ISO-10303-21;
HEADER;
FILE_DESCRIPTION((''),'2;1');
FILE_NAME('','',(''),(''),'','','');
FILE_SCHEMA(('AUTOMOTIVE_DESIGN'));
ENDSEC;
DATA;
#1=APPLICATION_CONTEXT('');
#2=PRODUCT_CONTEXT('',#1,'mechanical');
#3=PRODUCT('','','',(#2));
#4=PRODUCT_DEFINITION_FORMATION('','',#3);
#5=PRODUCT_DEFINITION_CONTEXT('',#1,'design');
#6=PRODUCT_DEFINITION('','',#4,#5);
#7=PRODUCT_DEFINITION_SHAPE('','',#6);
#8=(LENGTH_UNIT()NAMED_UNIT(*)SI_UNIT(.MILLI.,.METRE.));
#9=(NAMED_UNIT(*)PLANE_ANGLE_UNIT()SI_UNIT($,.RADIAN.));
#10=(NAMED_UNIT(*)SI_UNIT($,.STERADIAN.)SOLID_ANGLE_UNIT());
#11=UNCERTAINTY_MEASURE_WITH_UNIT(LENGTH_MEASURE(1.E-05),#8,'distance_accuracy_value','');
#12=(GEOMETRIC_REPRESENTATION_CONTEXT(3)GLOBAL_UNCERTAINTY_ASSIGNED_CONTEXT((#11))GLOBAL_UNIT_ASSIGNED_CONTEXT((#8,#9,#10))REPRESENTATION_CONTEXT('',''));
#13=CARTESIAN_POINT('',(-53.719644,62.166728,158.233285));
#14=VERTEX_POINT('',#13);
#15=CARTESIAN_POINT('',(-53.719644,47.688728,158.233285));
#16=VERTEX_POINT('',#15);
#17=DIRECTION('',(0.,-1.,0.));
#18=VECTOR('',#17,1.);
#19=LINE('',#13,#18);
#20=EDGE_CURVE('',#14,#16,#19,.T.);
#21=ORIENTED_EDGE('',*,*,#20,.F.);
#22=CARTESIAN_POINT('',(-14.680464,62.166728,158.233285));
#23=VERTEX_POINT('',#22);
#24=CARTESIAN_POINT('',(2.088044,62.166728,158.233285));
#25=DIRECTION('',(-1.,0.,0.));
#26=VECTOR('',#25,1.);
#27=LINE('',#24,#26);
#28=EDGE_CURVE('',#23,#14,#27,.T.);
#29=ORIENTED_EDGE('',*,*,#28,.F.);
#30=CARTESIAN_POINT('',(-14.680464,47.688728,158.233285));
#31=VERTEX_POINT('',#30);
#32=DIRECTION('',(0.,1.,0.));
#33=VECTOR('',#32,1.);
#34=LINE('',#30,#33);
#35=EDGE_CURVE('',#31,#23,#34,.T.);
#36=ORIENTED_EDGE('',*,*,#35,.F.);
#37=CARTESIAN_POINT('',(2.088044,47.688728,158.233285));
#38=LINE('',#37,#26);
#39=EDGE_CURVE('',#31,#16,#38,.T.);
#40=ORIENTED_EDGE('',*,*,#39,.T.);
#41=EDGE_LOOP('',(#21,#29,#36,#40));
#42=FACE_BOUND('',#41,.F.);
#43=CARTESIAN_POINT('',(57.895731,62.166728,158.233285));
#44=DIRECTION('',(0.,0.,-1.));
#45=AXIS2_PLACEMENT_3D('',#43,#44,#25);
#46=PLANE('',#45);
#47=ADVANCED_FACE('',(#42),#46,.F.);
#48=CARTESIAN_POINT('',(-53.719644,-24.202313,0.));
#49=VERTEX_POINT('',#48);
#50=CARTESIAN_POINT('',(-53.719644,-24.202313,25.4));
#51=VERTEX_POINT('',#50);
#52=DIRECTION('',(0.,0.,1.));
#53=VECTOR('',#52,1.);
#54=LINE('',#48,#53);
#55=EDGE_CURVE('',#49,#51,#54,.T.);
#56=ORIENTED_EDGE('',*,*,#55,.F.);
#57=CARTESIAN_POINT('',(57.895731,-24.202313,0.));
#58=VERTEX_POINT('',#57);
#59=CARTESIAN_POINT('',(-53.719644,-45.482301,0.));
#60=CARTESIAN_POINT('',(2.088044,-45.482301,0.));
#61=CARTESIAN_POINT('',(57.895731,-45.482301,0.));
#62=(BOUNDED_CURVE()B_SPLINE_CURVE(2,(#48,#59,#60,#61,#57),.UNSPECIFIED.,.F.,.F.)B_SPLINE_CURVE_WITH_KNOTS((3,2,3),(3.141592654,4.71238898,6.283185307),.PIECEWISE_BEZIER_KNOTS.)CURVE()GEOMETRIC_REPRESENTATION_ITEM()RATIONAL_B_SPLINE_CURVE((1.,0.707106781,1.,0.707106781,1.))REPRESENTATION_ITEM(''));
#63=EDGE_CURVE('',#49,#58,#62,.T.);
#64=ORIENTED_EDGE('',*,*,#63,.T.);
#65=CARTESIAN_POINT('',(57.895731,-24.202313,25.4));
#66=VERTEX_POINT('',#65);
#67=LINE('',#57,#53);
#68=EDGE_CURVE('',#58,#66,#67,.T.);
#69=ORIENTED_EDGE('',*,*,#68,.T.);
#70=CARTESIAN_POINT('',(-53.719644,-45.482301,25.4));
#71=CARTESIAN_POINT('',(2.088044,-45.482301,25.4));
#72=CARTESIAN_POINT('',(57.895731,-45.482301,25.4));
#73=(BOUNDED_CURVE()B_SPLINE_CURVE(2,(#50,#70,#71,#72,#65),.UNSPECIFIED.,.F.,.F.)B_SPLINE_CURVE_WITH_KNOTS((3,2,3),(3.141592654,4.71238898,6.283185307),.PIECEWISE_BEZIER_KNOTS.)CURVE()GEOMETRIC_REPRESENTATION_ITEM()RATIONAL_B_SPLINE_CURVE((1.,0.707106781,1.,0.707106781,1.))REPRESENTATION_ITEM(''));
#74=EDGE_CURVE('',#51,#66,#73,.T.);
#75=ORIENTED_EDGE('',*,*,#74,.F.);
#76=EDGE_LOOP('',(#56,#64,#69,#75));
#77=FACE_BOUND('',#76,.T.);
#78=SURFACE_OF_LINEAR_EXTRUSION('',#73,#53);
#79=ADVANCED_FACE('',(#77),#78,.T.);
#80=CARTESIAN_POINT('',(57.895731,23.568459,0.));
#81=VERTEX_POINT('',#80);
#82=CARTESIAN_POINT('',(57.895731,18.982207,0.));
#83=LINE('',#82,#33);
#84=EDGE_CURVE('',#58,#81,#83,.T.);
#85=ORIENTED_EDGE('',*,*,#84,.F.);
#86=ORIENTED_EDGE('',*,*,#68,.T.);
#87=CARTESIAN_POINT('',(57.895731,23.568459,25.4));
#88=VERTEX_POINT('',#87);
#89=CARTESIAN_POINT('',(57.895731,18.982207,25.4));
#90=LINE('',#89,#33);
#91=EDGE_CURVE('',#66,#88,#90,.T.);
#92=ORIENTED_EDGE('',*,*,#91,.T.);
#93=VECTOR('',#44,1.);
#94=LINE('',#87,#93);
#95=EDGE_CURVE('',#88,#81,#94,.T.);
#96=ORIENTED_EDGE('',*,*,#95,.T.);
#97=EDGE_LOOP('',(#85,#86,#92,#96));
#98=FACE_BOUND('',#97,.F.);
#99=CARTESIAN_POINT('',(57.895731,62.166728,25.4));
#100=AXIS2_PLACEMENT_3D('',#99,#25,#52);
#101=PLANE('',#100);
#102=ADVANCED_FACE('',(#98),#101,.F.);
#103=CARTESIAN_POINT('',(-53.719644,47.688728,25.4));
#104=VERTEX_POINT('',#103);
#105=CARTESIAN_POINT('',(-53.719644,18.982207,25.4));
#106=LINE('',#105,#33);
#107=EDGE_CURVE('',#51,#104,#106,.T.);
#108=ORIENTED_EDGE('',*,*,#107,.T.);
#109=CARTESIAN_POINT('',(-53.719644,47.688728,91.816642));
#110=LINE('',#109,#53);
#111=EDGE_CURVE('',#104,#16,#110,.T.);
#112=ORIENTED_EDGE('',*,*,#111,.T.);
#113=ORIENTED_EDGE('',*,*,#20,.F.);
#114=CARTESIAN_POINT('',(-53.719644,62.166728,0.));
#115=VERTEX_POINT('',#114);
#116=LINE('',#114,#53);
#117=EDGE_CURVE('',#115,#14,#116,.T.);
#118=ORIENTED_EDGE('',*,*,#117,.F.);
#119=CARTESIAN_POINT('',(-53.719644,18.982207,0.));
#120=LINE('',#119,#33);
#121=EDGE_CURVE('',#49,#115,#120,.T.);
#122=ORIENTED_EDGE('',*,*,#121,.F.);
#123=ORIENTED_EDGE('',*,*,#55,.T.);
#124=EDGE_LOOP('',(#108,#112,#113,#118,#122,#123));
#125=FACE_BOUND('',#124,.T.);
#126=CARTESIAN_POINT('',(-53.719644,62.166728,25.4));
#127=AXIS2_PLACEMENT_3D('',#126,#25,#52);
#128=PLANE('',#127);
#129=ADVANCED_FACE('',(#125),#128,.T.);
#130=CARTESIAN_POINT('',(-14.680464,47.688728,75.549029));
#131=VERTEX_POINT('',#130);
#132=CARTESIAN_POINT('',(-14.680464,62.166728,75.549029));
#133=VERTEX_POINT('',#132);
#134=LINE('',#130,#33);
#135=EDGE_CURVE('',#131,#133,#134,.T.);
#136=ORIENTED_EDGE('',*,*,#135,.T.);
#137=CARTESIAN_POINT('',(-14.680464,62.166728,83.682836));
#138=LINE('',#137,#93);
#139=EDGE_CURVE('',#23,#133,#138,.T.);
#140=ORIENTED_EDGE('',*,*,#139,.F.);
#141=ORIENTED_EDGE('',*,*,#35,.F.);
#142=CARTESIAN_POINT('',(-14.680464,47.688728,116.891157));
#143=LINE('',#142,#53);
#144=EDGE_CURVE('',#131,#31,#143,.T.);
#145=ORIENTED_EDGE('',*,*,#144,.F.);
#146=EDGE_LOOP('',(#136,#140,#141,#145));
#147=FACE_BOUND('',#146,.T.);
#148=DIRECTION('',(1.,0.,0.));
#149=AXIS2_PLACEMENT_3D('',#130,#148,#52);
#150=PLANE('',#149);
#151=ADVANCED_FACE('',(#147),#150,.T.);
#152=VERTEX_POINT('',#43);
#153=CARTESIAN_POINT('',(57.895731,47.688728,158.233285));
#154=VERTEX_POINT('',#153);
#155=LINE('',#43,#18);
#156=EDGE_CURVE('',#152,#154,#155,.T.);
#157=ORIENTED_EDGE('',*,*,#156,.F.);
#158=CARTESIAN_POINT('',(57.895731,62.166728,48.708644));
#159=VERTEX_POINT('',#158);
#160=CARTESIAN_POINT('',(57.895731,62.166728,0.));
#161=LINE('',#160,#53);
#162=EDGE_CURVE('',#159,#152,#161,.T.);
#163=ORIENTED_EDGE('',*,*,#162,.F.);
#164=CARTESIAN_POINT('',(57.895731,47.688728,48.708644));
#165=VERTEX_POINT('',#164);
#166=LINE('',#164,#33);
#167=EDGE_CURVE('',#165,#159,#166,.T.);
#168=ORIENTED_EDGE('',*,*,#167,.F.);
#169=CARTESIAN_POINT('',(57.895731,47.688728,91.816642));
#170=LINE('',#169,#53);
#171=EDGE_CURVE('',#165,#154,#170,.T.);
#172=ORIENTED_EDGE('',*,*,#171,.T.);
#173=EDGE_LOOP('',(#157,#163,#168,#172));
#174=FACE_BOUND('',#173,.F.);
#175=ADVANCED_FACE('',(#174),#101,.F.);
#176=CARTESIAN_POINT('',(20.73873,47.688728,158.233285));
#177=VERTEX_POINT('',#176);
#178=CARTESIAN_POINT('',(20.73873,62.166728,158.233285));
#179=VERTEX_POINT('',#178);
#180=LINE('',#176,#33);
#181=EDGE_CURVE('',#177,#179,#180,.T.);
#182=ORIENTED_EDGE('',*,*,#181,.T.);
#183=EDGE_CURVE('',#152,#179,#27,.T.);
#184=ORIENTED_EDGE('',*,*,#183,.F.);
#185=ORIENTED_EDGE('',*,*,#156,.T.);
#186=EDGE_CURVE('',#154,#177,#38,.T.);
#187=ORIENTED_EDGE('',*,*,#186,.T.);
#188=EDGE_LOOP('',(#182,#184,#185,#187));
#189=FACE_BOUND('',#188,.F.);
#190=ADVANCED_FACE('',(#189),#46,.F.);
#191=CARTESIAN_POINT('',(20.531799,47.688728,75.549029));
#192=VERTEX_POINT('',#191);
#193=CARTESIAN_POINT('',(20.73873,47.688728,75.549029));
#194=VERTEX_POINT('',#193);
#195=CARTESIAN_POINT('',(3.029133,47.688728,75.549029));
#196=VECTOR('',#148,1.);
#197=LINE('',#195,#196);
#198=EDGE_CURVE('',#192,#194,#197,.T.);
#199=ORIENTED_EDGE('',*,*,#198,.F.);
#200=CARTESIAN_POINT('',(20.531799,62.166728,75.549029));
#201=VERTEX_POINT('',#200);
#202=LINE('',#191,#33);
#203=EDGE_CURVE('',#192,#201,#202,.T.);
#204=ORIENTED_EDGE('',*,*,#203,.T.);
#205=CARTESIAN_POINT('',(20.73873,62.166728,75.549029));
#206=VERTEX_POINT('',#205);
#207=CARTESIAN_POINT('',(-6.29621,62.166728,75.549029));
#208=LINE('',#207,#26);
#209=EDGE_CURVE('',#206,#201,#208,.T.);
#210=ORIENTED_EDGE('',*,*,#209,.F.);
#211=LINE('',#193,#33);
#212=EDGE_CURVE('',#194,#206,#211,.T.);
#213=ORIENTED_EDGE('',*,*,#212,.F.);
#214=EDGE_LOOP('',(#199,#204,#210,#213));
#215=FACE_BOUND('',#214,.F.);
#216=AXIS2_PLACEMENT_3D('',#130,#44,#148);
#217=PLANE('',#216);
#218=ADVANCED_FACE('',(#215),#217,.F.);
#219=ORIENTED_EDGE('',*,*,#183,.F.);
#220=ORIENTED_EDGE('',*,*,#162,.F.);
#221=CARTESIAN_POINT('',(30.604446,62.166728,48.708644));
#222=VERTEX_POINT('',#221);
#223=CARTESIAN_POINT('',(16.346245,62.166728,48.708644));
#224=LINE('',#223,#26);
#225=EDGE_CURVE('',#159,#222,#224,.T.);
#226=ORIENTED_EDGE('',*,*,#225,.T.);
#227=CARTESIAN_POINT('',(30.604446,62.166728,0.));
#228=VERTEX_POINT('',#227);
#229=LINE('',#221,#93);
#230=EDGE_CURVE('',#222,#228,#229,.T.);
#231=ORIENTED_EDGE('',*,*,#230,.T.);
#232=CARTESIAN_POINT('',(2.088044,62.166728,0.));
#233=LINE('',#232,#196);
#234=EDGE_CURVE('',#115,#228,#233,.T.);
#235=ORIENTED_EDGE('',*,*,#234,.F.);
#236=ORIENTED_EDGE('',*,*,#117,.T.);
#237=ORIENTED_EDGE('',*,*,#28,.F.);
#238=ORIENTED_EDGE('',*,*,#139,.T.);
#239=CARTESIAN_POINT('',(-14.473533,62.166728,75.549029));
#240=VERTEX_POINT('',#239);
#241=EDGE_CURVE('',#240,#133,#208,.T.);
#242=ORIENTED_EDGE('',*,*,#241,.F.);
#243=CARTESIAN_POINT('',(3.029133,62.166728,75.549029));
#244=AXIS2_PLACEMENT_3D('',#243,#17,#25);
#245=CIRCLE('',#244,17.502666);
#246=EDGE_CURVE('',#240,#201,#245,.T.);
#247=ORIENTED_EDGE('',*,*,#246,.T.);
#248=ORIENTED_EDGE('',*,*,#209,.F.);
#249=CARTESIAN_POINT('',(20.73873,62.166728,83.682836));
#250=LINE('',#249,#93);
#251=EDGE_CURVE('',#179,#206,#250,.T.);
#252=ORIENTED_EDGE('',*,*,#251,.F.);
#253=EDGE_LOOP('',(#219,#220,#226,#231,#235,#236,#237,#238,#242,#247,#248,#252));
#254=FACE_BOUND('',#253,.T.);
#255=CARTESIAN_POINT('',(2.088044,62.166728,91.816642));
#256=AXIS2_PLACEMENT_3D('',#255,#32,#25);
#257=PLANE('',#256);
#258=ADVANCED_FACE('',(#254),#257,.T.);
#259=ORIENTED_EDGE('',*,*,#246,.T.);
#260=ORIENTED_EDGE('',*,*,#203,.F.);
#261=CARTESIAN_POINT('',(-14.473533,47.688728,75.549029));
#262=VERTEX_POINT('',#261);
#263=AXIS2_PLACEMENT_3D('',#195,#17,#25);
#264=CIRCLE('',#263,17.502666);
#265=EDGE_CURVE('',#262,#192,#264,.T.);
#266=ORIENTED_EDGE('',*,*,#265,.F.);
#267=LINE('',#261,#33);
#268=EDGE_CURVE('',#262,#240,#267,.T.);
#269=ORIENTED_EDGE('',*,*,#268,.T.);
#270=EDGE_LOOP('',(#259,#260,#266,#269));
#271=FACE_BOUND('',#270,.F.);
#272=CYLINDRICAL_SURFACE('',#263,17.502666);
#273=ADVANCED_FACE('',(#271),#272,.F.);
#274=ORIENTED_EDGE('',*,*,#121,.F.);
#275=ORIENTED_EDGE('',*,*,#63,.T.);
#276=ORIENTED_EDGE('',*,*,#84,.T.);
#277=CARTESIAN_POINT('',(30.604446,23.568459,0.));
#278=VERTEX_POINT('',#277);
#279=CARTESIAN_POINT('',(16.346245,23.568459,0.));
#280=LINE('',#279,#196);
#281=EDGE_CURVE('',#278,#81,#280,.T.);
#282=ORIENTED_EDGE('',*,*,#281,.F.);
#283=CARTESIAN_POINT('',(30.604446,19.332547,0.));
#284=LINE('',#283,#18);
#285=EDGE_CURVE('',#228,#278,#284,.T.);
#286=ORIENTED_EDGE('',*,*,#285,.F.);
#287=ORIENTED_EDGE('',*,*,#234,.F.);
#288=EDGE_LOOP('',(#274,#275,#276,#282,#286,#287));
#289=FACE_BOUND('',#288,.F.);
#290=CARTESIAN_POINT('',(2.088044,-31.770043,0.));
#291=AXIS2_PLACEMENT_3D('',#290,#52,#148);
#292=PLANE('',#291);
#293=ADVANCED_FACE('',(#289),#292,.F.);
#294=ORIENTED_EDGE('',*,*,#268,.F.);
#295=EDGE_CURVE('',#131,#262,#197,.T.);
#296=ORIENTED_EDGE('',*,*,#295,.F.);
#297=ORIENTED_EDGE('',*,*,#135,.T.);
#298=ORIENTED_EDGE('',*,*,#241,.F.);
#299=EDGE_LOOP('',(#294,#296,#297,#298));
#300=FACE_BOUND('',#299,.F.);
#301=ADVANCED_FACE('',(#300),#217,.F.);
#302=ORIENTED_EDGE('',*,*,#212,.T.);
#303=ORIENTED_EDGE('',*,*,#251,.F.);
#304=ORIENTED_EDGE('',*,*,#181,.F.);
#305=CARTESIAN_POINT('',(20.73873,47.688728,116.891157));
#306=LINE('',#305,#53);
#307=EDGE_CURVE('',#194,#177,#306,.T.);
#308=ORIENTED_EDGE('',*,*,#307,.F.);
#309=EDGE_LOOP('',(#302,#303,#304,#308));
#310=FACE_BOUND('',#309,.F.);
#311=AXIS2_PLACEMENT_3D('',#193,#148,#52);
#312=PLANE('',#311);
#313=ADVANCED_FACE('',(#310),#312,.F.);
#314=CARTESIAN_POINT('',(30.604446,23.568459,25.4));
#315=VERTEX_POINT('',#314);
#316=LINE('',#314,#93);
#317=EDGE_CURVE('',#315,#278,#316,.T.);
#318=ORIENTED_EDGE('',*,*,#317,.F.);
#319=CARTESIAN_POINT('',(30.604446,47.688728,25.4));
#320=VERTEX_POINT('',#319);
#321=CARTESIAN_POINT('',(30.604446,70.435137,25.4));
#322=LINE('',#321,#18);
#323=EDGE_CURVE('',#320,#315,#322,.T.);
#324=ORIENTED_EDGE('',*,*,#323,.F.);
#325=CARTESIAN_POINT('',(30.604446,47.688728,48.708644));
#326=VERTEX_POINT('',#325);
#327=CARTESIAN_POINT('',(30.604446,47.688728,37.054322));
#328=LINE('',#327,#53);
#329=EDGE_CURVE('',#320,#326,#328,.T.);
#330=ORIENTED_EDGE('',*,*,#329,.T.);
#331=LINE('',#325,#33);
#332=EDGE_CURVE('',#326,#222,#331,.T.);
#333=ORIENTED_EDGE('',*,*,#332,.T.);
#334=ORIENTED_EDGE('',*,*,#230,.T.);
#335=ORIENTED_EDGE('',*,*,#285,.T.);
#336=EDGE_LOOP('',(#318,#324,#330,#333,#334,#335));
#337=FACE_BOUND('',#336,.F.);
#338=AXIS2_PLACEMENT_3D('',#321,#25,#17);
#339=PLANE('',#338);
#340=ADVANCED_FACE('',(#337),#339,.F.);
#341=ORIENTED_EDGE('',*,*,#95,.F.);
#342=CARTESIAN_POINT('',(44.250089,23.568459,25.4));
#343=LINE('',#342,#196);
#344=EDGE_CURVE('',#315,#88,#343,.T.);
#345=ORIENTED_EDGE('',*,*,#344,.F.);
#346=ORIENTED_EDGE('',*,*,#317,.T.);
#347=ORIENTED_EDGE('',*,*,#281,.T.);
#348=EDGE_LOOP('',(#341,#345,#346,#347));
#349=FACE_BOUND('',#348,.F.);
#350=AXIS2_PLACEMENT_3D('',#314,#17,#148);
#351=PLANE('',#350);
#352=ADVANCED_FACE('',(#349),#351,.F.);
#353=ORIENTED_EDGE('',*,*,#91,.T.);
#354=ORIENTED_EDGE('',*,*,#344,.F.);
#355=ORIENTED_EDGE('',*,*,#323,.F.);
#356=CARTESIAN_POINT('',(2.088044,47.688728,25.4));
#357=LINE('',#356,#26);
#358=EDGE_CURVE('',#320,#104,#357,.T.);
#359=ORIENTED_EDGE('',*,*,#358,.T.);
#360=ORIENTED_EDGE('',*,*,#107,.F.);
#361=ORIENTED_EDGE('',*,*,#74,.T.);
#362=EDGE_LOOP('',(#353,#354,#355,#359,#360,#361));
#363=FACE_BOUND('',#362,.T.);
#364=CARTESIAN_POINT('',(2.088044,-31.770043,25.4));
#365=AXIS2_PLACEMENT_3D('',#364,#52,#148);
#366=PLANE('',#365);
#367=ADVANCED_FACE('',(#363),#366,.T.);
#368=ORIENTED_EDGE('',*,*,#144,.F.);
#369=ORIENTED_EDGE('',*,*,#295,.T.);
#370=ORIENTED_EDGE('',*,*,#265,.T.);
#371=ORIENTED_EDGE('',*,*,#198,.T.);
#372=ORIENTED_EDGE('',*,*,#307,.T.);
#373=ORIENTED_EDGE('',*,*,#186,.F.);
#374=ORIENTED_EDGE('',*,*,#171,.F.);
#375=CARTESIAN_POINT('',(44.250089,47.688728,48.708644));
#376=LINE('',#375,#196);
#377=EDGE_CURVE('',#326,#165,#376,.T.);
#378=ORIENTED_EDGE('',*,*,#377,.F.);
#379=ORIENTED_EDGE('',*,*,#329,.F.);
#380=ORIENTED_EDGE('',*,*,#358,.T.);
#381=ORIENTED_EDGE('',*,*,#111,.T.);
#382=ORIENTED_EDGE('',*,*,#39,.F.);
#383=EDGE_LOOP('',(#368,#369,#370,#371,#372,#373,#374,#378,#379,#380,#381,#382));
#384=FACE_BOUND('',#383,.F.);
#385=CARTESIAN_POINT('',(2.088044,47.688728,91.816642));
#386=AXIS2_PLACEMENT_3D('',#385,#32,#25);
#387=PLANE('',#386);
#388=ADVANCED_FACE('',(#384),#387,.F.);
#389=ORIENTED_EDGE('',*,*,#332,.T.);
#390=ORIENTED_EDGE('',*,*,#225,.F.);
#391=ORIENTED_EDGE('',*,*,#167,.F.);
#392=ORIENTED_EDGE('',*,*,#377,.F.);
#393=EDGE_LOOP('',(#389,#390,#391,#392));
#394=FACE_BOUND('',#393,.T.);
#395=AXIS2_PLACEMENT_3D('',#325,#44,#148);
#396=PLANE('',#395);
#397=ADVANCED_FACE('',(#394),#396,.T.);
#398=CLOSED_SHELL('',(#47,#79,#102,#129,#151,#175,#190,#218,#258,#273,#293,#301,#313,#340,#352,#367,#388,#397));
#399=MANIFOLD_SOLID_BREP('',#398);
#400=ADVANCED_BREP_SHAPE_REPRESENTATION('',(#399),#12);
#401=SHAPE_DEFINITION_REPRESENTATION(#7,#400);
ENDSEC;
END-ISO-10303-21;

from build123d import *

# Parameters (mm, degrees)
F0_W      = 111.6153746843
F0_H      = 86.3690413535
F1_DEPTH  = 25.4
F2_W      = 111.6153746843
F2_H      = 132.8332849503
F3_DEPTH  = 14.478
F5_DEPTH  = 25.4
F6_W      = 27.2912848741
F6_H      = 24.1202692242
F6_H_2    = 22.7464084773
F7_DEPTH  = 56.134
F8_W      = 27.2912848741
F8_H      = 23.3086437643
F9_DEPTH  = 25.4
F10_W     = 35.4191940278
F10_H     = 82.6842561364
F11_DEPTH = 25.4
F13_DEPTH = 25.4


with BuildPart() as f1:
    # F0 (on Top) → F1 (new body)
    with BuildSketch(Plane.XY):
        with Locations((2.0880438387, 18.9822074026)):
            Rectangle(F0_W, F0_H)
    extrude(amount=F1_DEPTH)

    # F2 (on face) → F3 (join)
    with BuildSketch(Plane(origin=(0, 62.1667280793, 0), x_dir=(-1, 0, 0), z_dir=(0, 1, 0))):
        with Locations((-2.0880438387, 91.8166424751)):
            Rectangle(F2_W, F2_H)
    extrude(amount=-F3_DEPTH)

    # F4 (on face) → F5 (join)
    with BuildSketch(Plane.XY.offset(25.4)):
        with BuildLine():
            add(Edge.make_bspline(
                [(-53.7196435034, -24.2023132741), (-53.7196435034, -45.4823012569), (2.0880438387, -45.4823012569), (57.8957311809, -45.4823012569), (57.8957311809, -24.2023132741)],
                knots=[3.1415926536, 3.1415926536, 3.1415926536, 4.7123889804, 4.7123889804, 6.2831853072, 6.2831853072, 6.2831853072], degree=2, weights=[1, 0.7071067812, 1, 0.7071067812, 1]))
            Line((57.8957311809, -24.2023132741), (-53.7196435034, -24.2023132741))
        make_face()
    extrude(amount=-F5_DEPTH)

    # F6 (on face) → F7 (cut)
    with BuildSketch(Plane.XY.offset(25.4)):
        with Locations((44.2500887439, 35.6285934672)):
            Rectangle(F6_W, F6_H)
        with Locations((44.2500887439, 59.061932318)):
            Rectangle(F6_W, F6_H_2)
    extrude(amount=-F7_DEPTH, mode=Mode.SUBTRACT)

    # F8 (on face) → F9 (cut)
    with BuildSketch(Plane.XZ.offset(-47.6887280793)):
        with Locations((44.2500887439, 37.0543218821)):
            Rectangle(F8_W, F8_H)
    extrude(amount=-F9_DEPTH, mode=Mode.SUBTRACT)

    # F10 (on face) → F11 (cut)
    with BuildSketch(Plane.XZ.offset(-47.6887280793)):
        with Locations((3.0291331932, 116.891156882)):
            Rectangle(F10_W, F10_H)
    extrude(amount=-F11_DEPTH, mode=Mode.SUBTRACT)

    # F12 (on face) → F13 (cut)
    with BuildSketch(Plane.XZ.offset(-47.6887280793)):
        with BuildLine():
            ThreePointArc((-14.4735330019, 75.5490288138), (3.0291331932, 58.0463626187), (20.5317993883, 75.5490288138))
            Line((20.5317993883, 75.5490288138), (-14.4735330019, 75.5490288138))
        make_face()
    extrude(amount=-F13_DEPTH, mode=Mode.SUBTRACT)


solid = f1.part
